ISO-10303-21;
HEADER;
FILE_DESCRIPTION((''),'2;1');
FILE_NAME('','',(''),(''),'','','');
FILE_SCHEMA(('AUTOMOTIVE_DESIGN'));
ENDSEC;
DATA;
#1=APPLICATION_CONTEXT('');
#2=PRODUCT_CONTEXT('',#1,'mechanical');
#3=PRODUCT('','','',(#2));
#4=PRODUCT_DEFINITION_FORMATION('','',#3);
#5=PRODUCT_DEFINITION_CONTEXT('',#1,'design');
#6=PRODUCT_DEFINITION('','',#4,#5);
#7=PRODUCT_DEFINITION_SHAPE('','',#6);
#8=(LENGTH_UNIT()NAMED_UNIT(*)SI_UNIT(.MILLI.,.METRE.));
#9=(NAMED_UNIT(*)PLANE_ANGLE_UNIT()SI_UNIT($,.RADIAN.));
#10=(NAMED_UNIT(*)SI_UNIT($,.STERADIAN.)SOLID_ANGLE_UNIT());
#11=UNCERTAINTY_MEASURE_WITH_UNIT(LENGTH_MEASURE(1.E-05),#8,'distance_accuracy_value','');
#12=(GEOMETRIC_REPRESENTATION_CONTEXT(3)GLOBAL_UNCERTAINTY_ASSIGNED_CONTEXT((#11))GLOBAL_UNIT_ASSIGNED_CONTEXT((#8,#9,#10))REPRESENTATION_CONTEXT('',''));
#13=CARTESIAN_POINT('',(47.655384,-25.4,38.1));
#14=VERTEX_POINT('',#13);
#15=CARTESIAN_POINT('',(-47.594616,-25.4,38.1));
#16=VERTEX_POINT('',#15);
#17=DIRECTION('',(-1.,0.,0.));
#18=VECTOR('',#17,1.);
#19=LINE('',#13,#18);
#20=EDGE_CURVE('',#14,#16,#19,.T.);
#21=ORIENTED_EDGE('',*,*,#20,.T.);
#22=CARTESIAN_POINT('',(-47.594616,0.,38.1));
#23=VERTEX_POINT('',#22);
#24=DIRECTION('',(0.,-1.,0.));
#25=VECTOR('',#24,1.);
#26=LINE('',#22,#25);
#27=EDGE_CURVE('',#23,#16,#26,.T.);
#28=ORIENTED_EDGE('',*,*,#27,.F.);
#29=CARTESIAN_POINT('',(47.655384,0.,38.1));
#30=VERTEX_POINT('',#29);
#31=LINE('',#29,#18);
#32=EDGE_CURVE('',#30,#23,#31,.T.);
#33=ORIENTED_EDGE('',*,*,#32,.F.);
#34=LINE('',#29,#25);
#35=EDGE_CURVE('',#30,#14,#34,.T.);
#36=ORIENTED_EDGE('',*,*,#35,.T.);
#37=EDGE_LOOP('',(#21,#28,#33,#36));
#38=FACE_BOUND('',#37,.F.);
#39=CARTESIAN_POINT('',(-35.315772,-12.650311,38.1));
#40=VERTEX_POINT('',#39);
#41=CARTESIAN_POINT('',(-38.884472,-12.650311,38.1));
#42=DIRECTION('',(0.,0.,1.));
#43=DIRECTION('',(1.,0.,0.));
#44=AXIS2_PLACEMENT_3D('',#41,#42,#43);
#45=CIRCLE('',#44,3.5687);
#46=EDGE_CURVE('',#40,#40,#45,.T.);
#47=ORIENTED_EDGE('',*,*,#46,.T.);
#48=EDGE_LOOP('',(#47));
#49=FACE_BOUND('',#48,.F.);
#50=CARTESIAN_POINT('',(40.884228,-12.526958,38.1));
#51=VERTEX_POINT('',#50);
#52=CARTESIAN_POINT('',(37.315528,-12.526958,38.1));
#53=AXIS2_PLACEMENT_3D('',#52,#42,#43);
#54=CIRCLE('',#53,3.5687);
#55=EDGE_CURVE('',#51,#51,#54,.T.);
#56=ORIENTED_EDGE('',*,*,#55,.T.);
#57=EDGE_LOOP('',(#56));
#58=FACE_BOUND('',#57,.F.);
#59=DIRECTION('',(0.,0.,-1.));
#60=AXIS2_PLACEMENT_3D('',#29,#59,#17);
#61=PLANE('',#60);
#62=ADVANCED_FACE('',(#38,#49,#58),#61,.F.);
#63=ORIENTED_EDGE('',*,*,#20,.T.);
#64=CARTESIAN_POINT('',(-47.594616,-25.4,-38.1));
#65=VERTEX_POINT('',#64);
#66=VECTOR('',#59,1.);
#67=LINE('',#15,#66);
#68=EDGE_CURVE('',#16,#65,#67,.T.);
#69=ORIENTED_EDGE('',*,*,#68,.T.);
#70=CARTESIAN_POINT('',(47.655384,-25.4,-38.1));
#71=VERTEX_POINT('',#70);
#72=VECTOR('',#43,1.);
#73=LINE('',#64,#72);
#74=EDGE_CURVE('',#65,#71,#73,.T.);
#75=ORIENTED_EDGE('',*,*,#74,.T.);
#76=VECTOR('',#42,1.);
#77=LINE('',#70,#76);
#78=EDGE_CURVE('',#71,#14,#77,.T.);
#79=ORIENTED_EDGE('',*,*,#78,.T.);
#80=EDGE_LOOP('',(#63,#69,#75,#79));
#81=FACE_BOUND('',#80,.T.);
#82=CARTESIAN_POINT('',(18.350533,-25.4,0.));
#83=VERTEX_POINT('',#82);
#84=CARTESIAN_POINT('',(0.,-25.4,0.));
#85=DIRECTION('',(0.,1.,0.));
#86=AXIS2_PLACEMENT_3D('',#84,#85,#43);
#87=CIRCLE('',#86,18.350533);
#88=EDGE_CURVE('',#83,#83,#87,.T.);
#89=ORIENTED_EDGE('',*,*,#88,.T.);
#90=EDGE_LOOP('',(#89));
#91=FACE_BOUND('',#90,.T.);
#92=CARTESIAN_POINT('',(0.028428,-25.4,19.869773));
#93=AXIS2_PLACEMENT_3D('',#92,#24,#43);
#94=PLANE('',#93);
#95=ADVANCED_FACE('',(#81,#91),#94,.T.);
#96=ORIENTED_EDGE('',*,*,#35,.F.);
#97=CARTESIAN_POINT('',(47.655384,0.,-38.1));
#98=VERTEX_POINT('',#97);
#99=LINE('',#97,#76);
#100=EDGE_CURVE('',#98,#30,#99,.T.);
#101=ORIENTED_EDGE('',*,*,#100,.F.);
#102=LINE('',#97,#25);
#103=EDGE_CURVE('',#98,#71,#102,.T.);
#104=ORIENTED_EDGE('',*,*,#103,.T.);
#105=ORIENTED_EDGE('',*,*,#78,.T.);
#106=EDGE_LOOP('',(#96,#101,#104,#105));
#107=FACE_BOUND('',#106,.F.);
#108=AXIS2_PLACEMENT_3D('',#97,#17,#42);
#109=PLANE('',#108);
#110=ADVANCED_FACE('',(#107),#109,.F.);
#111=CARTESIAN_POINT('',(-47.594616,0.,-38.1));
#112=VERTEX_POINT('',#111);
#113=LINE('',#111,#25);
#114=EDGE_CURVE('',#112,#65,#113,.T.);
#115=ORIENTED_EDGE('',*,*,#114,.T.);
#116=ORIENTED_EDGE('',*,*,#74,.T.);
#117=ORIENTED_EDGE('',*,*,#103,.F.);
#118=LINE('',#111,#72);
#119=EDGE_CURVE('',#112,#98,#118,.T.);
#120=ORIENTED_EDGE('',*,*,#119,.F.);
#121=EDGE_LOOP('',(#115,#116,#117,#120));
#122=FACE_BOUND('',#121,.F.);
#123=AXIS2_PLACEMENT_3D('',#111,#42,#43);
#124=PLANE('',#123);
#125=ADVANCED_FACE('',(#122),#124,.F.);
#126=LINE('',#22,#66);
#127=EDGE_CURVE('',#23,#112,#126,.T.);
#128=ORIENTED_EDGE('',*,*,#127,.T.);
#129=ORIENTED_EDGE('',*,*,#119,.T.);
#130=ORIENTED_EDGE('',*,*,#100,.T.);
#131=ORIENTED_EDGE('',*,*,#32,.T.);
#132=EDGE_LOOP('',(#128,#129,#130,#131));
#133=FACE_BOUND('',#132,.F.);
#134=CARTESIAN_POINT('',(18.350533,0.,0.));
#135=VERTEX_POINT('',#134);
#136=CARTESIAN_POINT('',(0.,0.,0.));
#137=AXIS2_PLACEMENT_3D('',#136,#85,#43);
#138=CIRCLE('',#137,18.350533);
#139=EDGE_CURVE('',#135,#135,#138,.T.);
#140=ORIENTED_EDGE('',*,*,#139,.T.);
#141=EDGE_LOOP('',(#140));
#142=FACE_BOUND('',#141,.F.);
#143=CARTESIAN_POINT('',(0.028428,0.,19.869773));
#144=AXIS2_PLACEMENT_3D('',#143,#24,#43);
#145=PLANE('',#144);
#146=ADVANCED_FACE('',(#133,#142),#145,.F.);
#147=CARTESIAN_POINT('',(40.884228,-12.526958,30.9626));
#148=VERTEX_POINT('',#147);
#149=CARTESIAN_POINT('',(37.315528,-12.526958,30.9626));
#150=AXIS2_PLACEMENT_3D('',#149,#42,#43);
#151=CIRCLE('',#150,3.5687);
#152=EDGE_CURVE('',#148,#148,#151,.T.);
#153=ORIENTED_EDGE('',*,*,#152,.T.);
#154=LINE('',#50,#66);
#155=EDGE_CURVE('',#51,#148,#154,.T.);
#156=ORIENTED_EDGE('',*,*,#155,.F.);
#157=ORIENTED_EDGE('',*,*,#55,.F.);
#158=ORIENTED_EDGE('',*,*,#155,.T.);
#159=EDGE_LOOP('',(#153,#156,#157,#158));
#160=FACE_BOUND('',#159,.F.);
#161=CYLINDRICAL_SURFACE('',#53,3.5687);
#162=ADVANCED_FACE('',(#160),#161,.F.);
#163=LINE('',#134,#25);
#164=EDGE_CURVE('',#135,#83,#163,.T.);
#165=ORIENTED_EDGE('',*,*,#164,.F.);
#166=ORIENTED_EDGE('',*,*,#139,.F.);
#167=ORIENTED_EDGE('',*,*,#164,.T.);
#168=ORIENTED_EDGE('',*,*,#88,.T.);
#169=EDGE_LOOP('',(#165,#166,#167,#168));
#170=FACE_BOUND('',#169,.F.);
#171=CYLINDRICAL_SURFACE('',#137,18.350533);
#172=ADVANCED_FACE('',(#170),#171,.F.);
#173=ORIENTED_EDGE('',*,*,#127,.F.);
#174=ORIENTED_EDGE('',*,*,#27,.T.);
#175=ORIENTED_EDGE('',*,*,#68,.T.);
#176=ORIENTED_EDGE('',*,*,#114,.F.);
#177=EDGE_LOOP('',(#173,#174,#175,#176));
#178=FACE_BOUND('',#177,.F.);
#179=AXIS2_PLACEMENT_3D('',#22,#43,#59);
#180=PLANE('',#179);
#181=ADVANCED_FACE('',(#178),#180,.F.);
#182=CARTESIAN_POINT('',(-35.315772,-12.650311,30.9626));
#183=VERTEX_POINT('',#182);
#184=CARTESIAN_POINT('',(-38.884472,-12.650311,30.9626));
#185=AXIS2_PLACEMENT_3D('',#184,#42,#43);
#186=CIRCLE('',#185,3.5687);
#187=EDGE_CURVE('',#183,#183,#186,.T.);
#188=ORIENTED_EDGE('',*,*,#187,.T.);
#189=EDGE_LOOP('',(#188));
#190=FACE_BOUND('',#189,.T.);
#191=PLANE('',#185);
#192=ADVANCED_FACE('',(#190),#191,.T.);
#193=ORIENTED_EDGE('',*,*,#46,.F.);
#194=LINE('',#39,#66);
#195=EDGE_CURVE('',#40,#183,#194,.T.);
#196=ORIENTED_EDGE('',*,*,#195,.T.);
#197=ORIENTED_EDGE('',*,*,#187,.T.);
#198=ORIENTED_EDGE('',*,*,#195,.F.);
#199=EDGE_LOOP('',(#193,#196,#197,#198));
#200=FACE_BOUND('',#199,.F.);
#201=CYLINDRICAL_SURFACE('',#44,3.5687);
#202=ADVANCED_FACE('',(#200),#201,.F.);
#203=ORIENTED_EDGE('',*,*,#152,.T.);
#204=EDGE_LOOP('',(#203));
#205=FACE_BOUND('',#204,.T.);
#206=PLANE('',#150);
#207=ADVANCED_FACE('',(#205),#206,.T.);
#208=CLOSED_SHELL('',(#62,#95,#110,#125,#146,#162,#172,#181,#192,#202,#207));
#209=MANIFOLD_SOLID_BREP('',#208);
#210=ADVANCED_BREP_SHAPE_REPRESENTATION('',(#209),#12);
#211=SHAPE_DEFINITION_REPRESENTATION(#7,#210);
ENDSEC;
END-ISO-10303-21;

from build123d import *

# Parameters (mm, degrees)
F1_DEPTH = 25.4
F2_R     = 3.5687
F3_DEPTH = 7.1374
F4_DEPTH = 7.1374


# Not quite as in the source:
# - a feature names something its author has since deleted; it is built from what else it names


with BuildPart() as f1:
    # F0 (on Front) → F1 (new body)
    with BuildSketch(Plane.XZ):
        with BuildLine():
            Line((47.6553842176, 38.1), (-47.5946157824, 38.1))
            Line((-47.5946157824, 38.1), (-47.5946157824, 0))
            Line((-47.5946157824, 0), (-18.3505333031, 0))
            ThreePointArc((-18.3505333031, 0), (0, 18.3505333031), (18.3505333031, 0))
            Line((18.3505333031, 0), (47.6553842176, 0))
            Line((47.6553842176, 0), (47.6553842176, 38.1))
        make_face()
        with BuildLine():
            Line((-18.3505333031, 0), (-47.5946157824, 0))
            Line((-47.5946157824, 0), (-47.5946157824, -38.1))
            Line((-47.5946157824, -38.1), (47.6553842176, -38.1))
            Line((47.6553842176, -38.1), (47.6553842176, 0))
            Line((47.6553842176, 0), (18.3505333031, 0))
            ThreePointArc((18.3505333031, 0), (0, -18.3505333031), (-18.3505333031, 0))
        make_face()
    extrude(amount=F1_DEPTH)

    # F2 (on face) → F3 (cut)
    with BuildSketch(Plane.XY.offset(38.1)):
        with Locations((37.3155283745, -12.5269582962)):
            Circle(F2_R)
    extrude(amount=-F3_DEPTH, mode=Mode.SUBTRACT)

    # F2 (on face) → F4 (cut)
    with BuildSketch(Plane.XY.offset(38.1)):
        with Locations((-38.8844716255, -12.6503112141)):
            Circle(F2_R)
        with Locations((37.3155283745, -12.5269582962)):
            Circle(F2_R)
    extrude(amount=-F4_DEPTH, mode=Mode.SUBTRACT)


solid = f1.part
